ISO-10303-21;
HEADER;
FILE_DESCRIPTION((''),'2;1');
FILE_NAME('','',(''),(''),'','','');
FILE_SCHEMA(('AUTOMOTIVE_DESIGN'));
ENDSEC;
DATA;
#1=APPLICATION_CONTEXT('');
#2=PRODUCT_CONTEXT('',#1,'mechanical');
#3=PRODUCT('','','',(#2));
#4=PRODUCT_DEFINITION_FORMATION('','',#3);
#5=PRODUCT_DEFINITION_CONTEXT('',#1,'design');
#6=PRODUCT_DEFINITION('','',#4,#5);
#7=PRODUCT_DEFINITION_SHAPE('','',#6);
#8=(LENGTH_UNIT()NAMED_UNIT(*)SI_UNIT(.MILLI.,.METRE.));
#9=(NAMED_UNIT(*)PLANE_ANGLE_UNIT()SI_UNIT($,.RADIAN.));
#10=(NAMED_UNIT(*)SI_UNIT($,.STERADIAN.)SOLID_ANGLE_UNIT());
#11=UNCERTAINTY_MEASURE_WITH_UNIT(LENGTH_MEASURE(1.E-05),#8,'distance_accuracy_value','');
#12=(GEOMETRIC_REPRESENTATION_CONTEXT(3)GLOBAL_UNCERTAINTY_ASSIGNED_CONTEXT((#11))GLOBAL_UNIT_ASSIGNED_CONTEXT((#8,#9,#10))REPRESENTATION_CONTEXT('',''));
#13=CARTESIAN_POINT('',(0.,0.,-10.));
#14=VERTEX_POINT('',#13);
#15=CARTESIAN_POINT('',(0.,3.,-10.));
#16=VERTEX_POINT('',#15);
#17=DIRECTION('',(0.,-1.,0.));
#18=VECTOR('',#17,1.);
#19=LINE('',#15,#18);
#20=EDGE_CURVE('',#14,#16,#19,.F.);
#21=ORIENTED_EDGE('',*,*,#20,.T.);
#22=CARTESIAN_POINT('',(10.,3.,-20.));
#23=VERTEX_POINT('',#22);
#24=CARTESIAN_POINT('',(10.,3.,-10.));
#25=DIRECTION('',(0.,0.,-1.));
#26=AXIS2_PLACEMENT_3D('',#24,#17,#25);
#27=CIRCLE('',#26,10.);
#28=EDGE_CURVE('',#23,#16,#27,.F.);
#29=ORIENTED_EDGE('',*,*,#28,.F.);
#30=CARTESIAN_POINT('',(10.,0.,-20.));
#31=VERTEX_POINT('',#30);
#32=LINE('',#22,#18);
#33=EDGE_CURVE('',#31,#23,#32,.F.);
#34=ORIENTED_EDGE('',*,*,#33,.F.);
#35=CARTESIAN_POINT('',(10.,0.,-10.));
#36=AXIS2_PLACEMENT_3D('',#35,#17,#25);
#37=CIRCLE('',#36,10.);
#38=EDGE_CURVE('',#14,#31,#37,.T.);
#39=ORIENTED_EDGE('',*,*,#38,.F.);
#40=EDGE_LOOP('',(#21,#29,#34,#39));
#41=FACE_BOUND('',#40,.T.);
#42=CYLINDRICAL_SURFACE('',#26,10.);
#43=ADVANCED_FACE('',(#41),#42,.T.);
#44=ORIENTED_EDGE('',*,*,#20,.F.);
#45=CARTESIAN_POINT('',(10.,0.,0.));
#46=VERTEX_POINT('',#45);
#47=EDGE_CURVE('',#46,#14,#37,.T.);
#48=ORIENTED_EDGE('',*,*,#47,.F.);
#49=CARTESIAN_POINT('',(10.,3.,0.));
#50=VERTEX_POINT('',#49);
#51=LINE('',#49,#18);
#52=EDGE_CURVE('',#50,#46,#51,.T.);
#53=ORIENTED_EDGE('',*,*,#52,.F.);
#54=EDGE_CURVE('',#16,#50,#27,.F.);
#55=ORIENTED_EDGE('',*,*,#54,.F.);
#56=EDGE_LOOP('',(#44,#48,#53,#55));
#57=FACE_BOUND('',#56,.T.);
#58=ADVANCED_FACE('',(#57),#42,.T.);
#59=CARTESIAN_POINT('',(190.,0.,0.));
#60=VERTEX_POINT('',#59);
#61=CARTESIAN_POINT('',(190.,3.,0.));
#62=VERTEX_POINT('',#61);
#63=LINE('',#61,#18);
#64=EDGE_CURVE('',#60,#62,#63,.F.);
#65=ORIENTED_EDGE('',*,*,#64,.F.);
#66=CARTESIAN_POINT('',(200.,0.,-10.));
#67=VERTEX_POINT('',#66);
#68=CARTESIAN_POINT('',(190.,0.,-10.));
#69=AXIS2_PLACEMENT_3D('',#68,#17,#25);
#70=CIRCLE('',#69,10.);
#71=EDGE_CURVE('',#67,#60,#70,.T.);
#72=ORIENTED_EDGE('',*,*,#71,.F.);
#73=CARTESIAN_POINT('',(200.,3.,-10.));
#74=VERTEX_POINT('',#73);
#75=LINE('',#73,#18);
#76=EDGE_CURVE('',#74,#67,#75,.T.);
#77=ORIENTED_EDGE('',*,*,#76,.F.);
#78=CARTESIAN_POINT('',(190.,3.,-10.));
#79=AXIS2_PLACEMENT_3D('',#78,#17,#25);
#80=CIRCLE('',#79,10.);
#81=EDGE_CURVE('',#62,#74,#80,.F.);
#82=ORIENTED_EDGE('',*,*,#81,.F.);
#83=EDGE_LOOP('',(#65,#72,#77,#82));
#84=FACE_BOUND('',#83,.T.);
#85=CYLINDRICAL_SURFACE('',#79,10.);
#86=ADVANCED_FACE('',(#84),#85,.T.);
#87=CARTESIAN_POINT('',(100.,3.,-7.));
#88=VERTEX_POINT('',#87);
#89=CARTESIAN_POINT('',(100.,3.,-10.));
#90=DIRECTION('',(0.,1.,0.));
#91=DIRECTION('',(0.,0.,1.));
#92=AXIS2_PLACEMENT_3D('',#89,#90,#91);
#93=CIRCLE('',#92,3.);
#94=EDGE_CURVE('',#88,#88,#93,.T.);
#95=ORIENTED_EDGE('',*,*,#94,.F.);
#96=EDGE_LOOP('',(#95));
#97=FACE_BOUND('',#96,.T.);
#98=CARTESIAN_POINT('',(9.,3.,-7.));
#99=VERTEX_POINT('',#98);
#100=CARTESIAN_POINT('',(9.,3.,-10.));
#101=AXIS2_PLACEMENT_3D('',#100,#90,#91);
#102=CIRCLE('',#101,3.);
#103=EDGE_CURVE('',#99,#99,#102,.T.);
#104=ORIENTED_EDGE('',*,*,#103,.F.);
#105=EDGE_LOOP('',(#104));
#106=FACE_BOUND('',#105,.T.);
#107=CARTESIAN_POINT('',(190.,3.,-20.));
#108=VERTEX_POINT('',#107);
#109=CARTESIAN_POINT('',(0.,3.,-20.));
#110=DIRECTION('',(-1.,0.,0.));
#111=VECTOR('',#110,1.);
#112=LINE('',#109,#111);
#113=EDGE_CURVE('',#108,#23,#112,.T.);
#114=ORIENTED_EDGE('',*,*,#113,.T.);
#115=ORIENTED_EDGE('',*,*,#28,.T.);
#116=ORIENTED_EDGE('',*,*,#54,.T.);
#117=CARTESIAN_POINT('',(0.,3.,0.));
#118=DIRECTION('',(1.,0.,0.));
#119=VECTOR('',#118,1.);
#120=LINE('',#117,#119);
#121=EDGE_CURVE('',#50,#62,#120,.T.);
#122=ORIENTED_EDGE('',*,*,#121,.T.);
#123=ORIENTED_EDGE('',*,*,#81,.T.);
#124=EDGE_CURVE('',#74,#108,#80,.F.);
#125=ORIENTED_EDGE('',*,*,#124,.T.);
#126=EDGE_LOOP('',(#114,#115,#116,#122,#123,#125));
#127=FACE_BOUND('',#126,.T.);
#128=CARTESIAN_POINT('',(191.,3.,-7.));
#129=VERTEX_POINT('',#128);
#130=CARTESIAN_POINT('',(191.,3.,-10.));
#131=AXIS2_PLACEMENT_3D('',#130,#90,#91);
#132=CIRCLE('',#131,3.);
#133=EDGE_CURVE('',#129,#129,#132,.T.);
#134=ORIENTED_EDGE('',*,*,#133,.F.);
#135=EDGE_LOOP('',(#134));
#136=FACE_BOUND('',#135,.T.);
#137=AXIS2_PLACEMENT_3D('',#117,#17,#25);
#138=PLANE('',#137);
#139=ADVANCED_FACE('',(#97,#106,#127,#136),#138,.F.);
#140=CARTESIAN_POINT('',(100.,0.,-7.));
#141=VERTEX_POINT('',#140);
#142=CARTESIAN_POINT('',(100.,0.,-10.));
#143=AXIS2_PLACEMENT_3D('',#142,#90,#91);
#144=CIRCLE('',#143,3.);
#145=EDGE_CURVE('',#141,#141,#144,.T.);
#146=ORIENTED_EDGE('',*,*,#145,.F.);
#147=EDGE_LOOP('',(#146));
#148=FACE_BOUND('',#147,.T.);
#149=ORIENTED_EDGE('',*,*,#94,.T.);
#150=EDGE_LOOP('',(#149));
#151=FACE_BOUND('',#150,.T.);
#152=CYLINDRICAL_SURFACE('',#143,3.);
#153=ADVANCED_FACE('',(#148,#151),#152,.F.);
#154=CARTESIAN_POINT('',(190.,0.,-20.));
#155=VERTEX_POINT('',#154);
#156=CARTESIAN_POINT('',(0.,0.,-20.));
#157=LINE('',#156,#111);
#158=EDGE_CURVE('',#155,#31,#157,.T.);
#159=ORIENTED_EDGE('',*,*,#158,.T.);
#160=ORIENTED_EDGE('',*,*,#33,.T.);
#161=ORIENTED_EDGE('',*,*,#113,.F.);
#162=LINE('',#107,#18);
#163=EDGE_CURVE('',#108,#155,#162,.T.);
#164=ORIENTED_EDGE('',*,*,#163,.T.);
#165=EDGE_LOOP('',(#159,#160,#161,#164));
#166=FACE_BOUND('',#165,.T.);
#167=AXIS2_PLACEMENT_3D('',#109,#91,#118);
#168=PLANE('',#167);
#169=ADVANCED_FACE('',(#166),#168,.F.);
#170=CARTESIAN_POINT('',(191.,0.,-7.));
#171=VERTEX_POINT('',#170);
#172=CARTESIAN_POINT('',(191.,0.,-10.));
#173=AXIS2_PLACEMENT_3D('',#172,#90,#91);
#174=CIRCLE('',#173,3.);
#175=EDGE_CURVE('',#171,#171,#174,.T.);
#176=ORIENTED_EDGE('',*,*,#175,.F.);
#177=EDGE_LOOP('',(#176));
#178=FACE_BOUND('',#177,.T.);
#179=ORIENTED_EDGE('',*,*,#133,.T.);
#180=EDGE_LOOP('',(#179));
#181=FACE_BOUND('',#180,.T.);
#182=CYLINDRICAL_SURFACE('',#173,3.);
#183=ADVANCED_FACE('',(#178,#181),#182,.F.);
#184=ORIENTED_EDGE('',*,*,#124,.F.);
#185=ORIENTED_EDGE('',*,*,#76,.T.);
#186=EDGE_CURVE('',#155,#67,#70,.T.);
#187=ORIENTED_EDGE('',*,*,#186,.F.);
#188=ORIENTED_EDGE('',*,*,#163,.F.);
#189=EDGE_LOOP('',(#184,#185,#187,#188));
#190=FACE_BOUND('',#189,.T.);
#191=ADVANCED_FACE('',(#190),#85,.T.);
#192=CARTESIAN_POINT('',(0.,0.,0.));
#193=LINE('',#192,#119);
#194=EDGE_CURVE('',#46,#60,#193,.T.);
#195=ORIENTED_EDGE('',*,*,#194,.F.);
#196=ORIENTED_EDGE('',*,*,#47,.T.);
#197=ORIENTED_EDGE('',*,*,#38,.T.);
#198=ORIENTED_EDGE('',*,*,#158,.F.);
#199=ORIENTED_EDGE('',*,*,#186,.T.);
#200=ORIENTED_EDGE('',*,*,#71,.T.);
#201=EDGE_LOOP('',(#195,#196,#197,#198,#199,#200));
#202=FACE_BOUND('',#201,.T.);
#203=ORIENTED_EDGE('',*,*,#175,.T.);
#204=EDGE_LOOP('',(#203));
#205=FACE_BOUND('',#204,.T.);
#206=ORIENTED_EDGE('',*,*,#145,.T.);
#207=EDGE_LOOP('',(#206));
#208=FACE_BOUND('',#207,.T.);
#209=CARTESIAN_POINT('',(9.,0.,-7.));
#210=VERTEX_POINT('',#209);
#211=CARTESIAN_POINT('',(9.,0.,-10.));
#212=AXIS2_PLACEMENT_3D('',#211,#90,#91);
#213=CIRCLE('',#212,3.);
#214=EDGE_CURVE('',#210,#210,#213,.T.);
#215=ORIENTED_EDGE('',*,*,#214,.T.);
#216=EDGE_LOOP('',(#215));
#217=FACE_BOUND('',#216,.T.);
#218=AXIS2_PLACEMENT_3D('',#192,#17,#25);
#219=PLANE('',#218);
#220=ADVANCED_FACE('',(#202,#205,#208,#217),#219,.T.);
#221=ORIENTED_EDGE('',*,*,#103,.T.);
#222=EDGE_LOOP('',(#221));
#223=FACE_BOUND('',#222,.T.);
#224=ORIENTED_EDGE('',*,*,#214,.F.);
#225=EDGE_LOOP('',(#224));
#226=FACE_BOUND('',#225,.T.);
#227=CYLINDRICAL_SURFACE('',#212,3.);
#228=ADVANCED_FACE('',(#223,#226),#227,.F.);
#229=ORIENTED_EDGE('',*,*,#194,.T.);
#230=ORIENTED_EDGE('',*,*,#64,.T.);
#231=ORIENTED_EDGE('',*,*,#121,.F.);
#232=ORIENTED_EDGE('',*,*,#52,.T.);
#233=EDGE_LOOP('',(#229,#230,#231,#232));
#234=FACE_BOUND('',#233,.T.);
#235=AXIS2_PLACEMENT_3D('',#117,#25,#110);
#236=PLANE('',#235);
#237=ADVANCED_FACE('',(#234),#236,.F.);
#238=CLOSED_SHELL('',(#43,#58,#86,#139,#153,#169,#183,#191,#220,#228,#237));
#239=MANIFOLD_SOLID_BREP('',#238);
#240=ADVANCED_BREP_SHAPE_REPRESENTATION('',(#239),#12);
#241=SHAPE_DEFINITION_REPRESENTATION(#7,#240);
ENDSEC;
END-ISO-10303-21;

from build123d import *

# Parameters (mm, degrees)
SKETCH2_W           = 200
SKETCH2_H           = 20
BOSS_EXTRUDE1_DEPTH = 3
SKETCH3_R           = 3
CUT_EXTRUDE1_DEPTH  = 202.019899512
SKETCH4_R           = 3
CUT_EXTRUDE2_DEPTH  = 202.019899512
FILLET1_R           = 10
FILLET2_R           = 10
SKETCH6_R           = 3
CUT_EXTRUDE3_DEPTH  = 202.019899512


with BuildPart() as part:
    # Sketch2 → Boss-Extrude1 (new body)
    with BuildSketch(Plane(origin=(0, 0, 0), x_dir=(1, 0, 0), z_dir=(0, 1, 0))):
        with Locations((100, 10)):
            Rectangle(SKETCH2_W, SKETCH2_H)
    extrude(amount=BOSS_EXTRUDE1_DEPTH)

    # Sketch3 → Cut-Extrude1 (cut, through all)
    with BuildSketch(Plane(origin=(0, 3, 0), x_dir=(1, 0, 0), z_dir=(0, 1, 0))):
        with Locations(Location((9, 10, 0), (0, 0, 270))):
            Circle(SKETCH3_R)
    extrude(amount=-CUT_EXTRUDE1_DEPTH, mode=Mode.SUBTRACT)

    # Sketch4 → Cut-Extrude2 (cut, through all)
    with BuildSketch(Plane(origin=(0, 3, 0), x_dir=(1, 0, 0), z_dir=(0, 1, 0))):
        with Locations(Location((191, 10, 0), (0, 0, 270))):
            Circle(SKETCH4_R)
    extrude(amount=-CUT_EXTRUDE2_DEPTH, mode=Mode.SUBTRACT)

    # Fillet1
    fillet1_edges = [part.edges().sort_by_distance(p)[0] for p in [
        (0, 1.5, -20),
        (0, 1.5, 0),
    ]]
    fillet(fillet1_edges, radius=FILLET1_R - 0.0001)  # a hair under: the kernel refuses the full size

    # Fillet2
    fillet2_edges = [part.edges().sort_by_distance(p)[0] for p in [
        (200, 1.5, -20),
        (200, 1.5, 0),
    ]]
    fillet(fillet2_edges, radius=FILLET2_R - 0.0001)  # a hair under: the kernel refuses the full size

    # Sketch6 → Cut-Extrude3 (cut, through all)
    with BuildSketch(Plane(origin=(0, 3, 0), x_dir=(1, 0, 0), z_dir=(0, 1, 0))):
        with Locations(Location((100, 10, 0), (0, 0, 270))):
            Circle(SKETCH6_R)
    extrude(amount=-CUT_EXTRUDE3_DEPTH, mode=Mode.SUBTRACT)


solid = part.part
